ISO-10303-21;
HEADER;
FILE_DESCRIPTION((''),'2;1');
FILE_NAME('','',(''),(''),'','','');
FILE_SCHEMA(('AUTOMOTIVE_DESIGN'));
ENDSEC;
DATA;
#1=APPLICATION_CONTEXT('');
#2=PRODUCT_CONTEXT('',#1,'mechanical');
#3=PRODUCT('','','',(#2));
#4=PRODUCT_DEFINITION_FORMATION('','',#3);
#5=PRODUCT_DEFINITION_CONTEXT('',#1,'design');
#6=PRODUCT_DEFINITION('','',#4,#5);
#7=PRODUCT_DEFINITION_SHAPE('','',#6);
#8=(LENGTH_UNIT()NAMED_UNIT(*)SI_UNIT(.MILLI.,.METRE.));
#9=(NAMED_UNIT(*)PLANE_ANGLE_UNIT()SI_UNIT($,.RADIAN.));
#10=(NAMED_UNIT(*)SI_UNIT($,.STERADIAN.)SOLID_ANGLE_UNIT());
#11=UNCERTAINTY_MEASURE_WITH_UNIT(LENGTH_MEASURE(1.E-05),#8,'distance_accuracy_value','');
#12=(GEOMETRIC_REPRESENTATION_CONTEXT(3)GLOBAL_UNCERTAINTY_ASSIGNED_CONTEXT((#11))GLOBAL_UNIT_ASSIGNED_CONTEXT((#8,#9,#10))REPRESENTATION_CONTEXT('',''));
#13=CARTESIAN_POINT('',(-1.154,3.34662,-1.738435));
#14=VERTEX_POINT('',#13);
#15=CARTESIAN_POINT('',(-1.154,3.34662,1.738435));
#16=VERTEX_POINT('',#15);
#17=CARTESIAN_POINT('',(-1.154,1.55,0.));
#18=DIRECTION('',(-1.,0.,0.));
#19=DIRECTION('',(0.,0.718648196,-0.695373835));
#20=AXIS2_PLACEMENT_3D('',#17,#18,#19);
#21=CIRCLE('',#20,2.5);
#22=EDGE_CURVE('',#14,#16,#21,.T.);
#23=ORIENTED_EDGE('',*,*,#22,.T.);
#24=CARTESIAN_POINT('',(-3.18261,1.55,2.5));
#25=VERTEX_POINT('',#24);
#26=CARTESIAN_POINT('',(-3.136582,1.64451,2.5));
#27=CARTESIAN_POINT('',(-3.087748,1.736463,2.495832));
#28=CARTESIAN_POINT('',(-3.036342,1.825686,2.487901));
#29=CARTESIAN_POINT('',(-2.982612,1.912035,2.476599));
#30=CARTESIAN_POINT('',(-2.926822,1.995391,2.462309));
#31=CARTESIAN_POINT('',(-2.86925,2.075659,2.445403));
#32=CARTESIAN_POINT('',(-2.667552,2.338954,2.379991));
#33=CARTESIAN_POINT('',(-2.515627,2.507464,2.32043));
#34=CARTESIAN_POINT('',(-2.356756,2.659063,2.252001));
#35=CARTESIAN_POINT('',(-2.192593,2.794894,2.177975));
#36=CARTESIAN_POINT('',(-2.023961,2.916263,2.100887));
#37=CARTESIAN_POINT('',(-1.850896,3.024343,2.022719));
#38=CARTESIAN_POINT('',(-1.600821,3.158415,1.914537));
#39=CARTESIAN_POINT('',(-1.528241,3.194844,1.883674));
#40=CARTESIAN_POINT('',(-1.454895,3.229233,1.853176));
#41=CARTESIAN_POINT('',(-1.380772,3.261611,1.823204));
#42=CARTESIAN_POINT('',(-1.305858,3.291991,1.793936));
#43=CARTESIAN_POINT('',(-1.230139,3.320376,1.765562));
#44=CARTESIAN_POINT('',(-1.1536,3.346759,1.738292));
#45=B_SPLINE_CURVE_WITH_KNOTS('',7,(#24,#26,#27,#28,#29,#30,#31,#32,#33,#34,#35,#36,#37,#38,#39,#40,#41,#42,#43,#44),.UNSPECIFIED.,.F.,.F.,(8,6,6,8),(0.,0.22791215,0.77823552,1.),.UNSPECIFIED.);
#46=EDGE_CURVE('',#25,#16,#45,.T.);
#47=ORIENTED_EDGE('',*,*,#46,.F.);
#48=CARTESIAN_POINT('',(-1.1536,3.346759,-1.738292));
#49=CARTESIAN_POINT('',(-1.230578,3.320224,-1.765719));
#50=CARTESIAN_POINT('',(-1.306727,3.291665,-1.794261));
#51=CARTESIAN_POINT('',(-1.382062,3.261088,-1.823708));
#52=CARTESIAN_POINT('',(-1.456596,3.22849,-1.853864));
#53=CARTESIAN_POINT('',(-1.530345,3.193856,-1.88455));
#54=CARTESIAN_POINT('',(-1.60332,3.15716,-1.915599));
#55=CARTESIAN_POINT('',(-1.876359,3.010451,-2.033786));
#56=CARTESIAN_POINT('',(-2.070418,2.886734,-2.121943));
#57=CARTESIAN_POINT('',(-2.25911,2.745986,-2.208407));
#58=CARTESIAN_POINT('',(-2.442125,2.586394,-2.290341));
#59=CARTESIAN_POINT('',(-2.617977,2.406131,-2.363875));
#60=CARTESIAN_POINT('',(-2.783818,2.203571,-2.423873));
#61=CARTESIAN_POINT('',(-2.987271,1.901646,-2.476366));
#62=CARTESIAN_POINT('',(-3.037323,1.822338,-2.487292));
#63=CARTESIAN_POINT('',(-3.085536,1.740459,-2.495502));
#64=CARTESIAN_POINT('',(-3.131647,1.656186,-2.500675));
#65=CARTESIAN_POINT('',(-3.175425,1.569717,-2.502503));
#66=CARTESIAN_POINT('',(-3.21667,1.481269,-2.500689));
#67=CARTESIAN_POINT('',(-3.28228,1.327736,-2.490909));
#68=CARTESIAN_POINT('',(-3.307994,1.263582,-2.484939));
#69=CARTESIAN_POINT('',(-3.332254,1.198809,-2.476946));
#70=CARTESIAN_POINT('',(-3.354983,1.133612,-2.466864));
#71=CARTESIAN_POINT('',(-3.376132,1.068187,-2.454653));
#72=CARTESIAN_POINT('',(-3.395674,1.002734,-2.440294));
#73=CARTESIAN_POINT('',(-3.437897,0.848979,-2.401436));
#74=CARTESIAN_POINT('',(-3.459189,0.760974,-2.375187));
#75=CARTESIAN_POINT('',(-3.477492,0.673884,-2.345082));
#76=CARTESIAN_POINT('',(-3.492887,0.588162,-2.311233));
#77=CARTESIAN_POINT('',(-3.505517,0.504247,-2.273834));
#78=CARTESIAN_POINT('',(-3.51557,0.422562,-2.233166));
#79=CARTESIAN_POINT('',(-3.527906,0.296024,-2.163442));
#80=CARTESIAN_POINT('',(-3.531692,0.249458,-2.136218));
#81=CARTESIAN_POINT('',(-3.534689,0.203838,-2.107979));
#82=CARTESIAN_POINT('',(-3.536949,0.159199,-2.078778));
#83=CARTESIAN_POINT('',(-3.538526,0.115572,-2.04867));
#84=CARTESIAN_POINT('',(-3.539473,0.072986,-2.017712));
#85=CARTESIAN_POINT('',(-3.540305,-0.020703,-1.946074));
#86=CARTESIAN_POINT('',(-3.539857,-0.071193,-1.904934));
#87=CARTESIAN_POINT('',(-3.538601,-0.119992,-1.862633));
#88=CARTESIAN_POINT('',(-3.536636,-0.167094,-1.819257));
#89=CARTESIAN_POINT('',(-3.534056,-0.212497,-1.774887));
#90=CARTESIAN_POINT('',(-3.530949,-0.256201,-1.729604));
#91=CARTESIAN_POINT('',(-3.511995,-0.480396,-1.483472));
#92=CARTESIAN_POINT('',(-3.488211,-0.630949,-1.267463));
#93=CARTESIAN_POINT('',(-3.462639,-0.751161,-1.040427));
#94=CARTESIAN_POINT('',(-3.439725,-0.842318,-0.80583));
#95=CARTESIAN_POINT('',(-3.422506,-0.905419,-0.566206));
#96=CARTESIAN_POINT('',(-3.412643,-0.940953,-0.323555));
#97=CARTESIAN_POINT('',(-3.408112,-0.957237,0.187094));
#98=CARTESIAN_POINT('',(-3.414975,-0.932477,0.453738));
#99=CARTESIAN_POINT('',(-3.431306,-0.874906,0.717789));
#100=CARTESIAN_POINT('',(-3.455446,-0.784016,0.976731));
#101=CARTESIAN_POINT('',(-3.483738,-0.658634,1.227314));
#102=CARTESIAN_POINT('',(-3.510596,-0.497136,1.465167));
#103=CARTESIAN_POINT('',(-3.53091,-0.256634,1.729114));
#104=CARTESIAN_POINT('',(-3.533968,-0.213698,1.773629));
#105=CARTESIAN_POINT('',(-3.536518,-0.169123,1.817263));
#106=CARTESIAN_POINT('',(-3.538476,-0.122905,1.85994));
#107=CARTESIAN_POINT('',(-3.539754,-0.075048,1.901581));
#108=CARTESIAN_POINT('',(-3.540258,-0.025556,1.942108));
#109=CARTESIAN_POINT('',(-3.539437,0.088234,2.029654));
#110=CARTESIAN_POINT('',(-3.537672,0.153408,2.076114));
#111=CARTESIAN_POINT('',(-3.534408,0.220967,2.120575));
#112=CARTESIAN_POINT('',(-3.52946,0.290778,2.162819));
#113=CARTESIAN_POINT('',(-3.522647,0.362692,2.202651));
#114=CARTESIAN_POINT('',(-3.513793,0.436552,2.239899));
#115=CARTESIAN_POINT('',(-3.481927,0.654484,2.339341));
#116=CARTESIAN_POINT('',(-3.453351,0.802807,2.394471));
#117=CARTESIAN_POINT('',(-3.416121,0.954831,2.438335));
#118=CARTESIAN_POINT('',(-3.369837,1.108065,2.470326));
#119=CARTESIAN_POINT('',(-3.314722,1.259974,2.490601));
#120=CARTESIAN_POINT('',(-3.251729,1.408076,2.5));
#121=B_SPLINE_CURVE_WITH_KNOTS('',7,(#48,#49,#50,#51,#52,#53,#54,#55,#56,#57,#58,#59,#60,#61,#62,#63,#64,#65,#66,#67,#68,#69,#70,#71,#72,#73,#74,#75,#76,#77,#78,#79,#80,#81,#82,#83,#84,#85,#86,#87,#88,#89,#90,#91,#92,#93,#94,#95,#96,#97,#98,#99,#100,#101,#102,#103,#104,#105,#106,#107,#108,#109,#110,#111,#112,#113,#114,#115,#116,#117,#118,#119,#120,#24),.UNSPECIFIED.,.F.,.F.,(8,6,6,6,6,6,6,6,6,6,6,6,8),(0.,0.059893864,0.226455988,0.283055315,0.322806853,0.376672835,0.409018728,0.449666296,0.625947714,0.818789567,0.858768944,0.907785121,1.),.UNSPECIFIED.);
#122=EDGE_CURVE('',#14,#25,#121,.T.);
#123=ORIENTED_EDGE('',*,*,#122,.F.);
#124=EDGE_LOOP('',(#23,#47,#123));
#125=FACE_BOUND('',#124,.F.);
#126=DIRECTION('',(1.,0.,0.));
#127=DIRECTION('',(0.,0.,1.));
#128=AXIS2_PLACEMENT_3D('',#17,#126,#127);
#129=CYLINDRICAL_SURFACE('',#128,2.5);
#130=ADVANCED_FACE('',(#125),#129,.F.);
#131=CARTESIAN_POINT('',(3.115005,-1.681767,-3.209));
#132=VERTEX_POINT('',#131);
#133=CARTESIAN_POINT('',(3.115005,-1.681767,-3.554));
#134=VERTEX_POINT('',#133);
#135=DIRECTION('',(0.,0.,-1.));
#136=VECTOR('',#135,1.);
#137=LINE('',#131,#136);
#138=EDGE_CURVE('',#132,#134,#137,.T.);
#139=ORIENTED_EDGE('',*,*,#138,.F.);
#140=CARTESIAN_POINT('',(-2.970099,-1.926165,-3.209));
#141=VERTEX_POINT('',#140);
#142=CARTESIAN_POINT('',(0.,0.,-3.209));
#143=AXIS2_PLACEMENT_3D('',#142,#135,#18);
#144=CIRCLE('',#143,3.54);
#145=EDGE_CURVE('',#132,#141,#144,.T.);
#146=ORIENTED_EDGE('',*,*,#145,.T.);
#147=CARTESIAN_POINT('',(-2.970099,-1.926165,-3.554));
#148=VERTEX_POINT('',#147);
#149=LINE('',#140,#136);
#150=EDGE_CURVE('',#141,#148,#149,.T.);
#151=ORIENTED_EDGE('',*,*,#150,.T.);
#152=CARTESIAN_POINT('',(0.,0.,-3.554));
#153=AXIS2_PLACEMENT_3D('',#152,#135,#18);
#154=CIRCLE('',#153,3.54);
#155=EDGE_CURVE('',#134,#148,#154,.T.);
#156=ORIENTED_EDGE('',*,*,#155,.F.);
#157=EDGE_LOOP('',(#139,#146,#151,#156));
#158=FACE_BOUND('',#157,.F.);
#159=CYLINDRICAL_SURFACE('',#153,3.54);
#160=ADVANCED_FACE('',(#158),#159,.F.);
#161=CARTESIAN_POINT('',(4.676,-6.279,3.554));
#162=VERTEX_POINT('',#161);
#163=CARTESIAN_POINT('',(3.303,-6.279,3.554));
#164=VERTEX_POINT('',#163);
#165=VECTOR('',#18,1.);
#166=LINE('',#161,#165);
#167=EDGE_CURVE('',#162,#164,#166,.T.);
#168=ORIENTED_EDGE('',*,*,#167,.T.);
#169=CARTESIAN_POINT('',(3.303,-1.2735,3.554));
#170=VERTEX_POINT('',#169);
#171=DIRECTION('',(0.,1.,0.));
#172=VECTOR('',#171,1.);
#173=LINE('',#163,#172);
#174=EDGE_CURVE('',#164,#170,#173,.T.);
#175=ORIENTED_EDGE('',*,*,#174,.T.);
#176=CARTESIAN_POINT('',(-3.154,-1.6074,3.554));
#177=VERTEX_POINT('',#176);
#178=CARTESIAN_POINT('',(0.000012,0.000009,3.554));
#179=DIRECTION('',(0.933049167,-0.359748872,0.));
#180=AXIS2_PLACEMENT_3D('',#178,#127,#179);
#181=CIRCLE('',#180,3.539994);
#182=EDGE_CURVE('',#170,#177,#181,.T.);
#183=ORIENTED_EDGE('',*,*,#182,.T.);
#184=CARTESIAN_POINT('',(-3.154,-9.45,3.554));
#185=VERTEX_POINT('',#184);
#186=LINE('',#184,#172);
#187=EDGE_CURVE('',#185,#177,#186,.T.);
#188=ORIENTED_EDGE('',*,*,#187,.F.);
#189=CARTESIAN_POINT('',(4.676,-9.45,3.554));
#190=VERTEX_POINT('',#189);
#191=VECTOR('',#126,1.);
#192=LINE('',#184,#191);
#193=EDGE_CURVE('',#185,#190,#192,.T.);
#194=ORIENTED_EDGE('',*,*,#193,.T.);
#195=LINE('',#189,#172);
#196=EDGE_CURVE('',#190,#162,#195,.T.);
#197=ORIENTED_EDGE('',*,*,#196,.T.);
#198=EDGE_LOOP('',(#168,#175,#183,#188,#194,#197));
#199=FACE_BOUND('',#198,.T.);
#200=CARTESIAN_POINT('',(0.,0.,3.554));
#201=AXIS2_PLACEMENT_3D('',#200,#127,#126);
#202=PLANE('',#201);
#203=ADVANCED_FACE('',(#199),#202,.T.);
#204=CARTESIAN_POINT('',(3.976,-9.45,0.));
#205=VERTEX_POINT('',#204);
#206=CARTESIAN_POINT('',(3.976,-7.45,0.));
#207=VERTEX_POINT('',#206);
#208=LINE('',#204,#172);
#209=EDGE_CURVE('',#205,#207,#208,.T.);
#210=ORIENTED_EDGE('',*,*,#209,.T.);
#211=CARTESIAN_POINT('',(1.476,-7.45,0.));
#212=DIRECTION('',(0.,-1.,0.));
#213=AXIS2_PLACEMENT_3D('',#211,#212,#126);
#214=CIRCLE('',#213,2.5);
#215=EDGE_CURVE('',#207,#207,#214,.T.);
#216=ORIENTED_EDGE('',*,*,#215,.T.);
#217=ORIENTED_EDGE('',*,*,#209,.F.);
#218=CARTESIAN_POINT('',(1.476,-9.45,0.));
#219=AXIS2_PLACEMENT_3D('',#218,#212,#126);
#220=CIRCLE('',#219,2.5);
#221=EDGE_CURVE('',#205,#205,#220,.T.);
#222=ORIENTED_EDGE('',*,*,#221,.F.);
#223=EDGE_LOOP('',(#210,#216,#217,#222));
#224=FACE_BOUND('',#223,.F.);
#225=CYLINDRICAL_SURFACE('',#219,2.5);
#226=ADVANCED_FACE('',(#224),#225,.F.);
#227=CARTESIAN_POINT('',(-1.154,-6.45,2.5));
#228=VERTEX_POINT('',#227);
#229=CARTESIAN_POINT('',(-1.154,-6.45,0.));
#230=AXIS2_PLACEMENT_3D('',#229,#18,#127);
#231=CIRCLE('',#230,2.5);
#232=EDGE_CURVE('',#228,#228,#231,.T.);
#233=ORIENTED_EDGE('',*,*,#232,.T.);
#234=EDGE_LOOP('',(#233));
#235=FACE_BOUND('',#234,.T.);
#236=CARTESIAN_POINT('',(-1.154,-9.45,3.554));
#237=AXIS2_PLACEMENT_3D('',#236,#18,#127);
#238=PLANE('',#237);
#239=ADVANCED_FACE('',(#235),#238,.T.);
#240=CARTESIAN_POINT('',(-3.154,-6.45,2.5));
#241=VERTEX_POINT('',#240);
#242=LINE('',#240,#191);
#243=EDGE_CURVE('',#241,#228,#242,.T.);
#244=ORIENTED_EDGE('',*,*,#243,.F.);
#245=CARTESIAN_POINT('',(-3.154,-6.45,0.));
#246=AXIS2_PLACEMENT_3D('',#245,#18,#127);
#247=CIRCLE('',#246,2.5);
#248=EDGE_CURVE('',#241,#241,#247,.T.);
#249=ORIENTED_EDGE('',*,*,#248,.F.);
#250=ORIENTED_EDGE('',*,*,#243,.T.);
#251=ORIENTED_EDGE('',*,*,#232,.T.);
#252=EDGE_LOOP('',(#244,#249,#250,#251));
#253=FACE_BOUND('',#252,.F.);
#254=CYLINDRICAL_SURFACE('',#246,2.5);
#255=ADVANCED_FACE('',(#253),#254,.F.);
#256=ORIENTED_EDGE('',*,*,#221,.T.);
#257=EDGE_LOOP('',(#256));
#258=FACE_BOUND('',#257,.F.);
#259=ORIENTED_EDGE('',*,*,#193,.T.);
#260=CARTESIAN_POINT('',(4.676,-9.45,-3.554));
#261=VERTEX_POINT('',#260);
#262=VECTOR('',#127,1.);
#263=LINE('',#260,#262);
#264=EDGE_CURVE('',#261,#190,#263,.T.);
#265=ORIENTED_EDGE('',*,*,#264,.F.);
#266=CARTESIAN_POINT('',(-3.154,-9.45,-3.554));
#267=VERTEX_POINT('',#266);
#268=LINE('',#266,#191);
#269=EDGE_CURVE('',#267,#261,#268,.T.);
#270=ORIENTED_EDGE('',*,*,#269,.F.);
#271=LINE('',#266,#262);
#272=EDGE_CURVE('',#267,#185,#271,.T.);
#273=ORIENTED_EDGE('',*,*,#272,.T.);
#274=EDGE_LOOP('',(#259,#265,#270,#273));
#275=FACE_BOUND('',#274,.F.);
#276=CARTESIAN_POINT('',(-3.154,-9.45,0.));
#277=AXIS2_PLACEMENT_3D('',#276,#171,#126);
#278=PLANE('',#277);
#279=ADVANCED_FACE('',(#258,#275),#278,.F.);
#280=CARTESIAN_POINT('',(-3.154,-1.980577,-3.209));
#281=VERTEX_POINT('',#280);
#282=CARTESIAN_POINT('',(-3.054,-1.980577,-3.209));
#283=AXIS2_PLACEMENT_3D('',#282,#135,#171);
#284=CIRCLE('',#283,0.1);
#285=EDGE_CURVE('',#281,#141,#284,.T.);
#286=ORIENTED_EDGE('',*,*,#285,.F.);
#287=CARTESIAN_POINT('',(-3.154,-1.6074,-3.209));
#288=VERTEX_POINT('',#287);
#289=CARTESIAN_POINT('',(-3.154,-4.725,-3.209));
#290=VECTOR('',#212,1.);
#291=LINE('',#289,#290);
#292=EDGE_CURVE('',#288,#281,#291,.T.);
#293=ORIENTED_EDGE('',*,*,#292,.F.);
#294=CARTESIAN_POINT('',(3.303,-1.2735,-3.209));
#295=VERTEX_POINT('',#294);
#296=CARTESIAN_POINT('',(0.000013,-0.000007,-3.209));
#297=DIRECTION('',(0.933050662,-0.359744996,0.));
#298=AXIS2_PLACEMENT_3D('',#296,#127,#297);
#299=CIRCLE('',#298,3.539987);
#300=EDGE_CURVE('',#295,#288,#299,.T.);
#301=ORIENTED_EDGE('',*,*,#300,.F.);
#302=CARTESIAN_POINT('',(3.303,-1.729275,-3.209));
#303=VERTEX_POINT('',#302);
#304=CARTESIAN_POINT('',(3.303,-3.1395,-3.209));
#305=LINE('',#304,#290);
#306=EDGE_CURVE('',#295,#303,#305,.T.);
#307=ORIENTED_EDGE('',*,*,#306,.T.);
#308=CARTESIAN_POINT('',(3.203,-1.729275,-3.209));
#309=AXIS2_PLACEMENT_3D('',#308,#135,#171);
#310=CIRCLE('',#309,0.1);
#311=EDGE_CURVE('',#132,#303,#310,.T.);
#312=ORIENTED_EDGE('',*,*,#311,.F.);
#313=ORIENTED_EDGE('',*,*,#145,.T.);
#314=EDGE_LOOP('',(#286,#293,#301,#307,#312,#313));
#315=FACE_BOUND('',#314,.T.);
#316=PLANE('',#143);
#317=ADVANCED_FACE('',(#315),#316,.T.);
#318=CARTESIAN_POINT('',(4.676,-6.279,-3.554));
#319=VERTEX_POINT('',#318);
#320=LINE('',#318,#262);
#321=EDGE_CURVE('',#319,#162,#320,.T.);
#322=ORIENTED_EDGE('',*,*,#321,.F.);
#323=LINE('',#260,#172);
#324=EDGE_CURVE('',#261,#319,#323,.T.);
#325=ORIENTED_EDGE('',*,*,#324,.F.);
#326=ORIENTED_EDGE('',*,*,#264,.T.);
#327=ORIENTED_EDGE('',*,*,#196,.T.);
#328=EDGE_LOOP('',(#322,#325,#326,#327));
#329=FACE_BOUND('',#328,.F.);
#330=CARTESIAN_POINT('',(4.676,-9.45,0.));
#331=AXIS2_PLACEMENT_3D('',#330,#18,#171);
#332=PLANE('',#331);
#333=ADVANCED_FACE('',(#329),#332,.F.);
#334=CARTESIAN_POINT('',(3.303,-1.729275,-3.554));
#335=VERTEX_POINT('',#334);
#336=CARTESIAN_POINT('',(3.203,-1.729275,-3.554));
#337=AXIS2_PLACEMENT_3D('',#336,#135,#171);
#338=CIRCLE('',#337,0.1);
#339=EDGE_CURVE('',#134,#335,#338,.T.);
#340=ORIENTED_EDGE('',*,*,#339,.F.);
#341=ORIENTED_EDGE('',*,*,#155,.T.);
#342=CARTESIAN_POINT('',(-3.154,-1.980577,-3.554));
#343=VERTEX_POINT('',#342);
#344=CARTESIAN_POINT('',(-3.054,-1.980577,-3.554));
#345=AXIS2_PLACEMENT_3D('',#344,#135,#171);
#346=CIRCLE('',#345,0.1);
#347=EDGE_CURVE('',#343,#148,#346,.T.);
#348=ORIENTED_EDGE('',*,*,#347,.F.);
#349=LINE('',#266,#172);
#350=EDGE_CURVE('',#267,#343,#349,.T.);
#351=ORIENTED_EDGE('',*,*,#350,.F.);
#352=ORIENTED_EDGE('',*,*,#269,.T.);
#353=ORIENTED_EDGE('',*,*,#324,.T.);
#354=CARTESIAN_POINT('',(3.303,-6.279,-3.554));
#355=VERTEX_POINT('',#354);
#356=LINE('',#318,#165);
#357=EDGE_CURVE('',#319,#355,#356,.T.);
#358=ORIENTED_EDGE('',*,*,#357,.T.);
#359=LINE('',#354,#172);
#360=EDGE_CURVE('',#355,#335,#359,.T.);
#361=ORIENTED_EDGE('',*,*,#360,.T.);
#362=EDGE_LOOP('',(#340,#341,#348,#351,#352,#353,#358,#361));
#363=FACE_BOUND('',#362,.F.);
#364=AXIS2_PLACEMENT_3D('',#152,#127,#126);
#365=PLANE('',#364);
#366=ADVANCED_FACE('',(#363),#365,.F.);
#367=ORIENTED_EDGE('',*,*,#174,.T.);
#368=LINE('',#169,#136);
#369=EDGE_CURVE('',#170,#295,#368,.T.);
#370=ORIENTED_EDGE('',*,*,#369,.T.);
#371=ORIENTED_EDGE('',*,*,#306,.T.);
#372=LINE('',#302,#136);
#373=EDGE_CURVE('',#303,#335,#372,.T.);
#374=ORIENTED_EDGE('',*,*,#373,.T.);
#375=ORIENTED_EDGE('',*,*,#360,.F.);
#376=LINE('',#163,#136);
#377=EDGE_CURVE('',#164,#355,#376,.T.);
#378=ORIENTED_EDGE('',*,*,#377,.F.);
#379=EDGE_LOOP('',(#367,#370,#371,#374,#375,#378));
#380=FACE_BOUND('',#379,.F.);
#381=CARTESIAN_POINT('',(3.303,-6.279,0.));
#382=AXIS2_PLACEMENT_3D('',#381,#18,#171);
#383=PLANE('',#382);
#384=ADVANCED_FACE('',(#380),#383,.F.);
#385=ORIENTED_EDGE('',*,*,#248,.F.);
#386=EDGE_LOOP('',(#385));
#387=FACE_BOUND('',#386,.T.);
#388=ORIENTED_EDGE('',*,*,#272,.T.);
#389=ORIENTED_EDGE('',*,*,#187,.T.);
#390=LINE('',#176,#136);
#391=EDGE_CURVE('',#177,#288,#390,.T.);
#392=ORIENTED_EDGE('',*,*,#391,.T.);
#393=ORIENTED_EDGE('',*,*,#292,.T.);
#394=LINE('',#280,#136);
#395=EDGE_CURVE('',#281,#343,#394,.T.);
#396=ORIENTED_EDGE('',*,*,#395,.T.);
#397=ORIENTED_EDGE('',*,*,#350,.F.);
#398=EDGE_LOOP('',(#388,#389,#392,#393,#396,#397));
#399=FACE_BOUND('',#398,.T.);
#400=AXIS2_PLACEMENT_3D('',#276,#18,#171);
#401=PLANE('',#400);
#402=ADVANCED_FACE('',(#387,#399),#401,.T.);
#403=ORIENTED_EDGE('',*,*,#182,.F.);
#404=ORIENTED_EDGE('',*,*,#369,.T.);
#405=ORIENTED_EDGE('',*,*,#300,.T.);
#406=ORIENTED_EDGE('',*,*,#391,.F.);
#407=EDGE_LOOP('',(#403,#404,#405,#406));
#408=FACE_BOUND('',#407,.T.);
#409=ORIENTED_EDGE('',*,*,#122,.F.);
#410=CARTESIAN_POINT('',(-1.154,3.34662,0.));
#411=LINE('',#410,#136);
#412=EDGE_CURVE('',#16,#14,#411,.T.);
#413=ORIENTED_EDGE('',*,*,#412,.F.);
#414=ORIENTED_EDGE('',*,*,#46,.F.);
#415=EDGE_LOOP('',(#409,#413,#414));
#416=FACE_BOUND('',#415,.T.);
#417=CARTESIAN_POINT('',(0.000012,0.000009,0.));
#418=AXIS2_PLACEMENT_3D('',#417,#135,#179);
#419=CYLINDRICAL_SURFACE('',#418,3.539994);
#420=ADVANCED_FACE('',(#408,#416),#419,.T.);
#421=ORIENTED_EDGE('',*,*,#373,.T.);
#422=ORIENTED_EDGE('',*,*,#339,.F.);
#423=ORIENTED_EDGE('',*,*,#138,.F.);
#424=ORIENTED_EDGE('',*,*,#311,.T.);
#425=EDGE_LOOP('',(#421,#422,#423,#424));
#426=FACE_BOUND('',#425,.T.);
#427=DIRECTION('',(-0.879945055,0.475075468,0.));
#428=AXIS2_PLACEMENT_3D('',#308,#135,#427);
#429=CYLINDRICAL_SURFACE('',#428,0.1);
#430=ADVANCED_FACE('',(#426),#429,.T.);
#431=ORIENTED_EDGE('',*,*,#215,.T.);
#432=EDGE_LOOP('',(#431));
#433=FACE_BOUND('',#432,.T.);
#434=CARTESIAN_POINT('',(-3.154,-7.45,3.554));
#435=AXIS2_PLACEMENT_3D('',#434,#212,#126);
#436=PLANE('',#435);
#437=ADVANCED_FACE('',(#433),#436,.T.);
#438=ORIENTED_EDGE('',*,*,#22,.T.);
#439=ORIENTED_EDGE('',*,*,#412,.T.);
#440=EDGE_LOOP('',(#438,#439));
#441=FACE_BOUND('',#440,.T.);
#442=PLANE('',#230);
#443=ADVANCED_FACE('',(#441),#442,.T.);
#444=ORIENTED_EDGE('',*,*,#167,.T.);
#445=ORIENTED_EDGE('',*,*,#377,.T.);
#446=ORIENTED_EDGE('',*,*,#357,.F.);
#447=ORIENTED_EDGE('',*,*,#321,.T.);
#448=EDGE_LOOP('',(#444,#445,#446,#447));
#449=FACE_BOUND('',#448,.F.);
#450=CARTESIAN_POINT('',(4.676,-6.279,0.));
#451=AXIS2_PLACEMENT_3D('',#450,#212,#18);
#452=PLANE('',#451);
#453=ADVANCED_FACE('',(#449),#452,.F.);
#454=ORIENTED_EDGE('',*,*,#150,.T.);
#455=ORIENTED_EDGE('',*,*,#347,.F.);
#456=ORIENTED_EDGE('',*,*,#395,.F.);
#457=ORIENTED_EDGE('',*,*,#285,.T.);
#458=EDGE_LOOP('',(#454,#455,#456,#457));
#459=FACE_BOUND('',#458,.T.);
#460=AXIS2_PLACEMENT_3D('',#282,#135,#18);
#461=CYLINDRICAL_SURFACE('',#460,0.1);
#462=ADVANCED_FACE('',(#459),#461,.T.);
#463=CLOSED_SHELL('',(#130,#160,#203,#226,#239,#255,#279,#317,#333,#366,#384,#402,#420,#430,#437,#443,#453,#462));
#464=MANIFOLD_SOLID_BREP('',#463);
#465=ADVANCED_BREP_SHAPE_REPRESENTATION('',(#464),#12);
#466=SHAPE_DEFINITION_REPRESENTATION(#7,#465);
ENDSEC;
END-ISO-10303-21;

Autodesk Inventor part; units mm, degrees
ref_plane "YZ Plane" through (0, 0, 0) normal (1, 0, 0) x (0, 1, 0)
ref_plane "XZ Plane" through (0, 0, 0) normal (0, 1, 0) x (-1, 0, 0)
ref_plane "XY Plane" through (0, 0, 0) normal (0, 0, 1) x (1, 0, 0)
sketch "Sketch1" plane through (0, 0, 0) normal (0, 0, 1) x (1, 0, 0)
  line L0 (-3.154, -9.45) -> (4.676, -9.45)
  line L1 (4.676, -9.45) -> (4.676, -6.279)
  line L2 (4.676, -6.279) -> (3.303, -6.279)
  line L3 (3.303, -6.279) -> (3.303, -1.2735)
  line L4 (-3.154, -9.45) -> (-3.154, -1.6074)
  arc A0 (3.303, -1.2735) -> (-3.154, -1.6074) centre (0, 0) ccw
  dimension "d0" = 7.83
  dimension "d1" = 9.45
  dimension "d2" = 3.54
  dimension "d3" = 3.154
  dimension "d4" = 3.171
  dimension "d5" = 6.457
extrude "Extrusion1" add sketch "Sketch1" along normal mid plane 7.108
sketch "Sketch2" plane through (-3.154, -9.45, 3.554) normal (0, -1, 0) x (1, 0, 0)
  line L0 (7.83, -7.108) -> (7.83, 0) projected
  circle A0 centre (4.63, -3.554) radius 2.5
  point P0 (3.154, -3.554)
  dimension "d8" = 5
  dimension "d9" = 3.2
extrude "Extrusion2" cut sketch "Sketch2" against normal blind 2
sketch "Sketch3" plane through (-3.154, -9.45, 3.554) normal (-1, 0, 0) x (0, 0, 1)
  line L0 (0, 0) -> (-7.108, 0) projected
  circle A0 centre (-3.554, 3) radius 2.5
  point P0 (-3.554, 9.45)
  dimension "d12" = 5
  dimension "d13" = 3
extrude "Extrusion3" cut sketch "Sketch3" against normal blind 2
sketch "Sketch4" plane through (-1.154, -6.45, 0) normal (-1, 0, 0) x (0, 0, 1)
  circle A0 centre (0, 0) radius 2.5 construction
  circle A1 centre (0, 8) radius 2.5
  circle A2 centre (0, 0) radius 2.5 projected
  point P0 (0, 6.45)
  dimension "d16" = 8
extrude "Extrusion4" cut sketch "Sketch4" along normal through all contours A1
sketch "Sketch5" plane through (0, 0, -3.554) normal (0, 0, -1) x (-1, 0, 0)
  arc A0 (3.154, -1.6074) -> (-3.303, -1.2735) centre (0, 0) ccw projected
  circle A1 centre (0, 0) radius 3.54
extrude "Extrusion5" cut sketch "Sketch5" against normal blind 0.345
fillet "Fillet1" radius 0.1 2 edges at (3.303, -1.2735, -3.3815) (-3.154, -1.6074, -3.3815)
properties part number "LEG LHS" material "250"
